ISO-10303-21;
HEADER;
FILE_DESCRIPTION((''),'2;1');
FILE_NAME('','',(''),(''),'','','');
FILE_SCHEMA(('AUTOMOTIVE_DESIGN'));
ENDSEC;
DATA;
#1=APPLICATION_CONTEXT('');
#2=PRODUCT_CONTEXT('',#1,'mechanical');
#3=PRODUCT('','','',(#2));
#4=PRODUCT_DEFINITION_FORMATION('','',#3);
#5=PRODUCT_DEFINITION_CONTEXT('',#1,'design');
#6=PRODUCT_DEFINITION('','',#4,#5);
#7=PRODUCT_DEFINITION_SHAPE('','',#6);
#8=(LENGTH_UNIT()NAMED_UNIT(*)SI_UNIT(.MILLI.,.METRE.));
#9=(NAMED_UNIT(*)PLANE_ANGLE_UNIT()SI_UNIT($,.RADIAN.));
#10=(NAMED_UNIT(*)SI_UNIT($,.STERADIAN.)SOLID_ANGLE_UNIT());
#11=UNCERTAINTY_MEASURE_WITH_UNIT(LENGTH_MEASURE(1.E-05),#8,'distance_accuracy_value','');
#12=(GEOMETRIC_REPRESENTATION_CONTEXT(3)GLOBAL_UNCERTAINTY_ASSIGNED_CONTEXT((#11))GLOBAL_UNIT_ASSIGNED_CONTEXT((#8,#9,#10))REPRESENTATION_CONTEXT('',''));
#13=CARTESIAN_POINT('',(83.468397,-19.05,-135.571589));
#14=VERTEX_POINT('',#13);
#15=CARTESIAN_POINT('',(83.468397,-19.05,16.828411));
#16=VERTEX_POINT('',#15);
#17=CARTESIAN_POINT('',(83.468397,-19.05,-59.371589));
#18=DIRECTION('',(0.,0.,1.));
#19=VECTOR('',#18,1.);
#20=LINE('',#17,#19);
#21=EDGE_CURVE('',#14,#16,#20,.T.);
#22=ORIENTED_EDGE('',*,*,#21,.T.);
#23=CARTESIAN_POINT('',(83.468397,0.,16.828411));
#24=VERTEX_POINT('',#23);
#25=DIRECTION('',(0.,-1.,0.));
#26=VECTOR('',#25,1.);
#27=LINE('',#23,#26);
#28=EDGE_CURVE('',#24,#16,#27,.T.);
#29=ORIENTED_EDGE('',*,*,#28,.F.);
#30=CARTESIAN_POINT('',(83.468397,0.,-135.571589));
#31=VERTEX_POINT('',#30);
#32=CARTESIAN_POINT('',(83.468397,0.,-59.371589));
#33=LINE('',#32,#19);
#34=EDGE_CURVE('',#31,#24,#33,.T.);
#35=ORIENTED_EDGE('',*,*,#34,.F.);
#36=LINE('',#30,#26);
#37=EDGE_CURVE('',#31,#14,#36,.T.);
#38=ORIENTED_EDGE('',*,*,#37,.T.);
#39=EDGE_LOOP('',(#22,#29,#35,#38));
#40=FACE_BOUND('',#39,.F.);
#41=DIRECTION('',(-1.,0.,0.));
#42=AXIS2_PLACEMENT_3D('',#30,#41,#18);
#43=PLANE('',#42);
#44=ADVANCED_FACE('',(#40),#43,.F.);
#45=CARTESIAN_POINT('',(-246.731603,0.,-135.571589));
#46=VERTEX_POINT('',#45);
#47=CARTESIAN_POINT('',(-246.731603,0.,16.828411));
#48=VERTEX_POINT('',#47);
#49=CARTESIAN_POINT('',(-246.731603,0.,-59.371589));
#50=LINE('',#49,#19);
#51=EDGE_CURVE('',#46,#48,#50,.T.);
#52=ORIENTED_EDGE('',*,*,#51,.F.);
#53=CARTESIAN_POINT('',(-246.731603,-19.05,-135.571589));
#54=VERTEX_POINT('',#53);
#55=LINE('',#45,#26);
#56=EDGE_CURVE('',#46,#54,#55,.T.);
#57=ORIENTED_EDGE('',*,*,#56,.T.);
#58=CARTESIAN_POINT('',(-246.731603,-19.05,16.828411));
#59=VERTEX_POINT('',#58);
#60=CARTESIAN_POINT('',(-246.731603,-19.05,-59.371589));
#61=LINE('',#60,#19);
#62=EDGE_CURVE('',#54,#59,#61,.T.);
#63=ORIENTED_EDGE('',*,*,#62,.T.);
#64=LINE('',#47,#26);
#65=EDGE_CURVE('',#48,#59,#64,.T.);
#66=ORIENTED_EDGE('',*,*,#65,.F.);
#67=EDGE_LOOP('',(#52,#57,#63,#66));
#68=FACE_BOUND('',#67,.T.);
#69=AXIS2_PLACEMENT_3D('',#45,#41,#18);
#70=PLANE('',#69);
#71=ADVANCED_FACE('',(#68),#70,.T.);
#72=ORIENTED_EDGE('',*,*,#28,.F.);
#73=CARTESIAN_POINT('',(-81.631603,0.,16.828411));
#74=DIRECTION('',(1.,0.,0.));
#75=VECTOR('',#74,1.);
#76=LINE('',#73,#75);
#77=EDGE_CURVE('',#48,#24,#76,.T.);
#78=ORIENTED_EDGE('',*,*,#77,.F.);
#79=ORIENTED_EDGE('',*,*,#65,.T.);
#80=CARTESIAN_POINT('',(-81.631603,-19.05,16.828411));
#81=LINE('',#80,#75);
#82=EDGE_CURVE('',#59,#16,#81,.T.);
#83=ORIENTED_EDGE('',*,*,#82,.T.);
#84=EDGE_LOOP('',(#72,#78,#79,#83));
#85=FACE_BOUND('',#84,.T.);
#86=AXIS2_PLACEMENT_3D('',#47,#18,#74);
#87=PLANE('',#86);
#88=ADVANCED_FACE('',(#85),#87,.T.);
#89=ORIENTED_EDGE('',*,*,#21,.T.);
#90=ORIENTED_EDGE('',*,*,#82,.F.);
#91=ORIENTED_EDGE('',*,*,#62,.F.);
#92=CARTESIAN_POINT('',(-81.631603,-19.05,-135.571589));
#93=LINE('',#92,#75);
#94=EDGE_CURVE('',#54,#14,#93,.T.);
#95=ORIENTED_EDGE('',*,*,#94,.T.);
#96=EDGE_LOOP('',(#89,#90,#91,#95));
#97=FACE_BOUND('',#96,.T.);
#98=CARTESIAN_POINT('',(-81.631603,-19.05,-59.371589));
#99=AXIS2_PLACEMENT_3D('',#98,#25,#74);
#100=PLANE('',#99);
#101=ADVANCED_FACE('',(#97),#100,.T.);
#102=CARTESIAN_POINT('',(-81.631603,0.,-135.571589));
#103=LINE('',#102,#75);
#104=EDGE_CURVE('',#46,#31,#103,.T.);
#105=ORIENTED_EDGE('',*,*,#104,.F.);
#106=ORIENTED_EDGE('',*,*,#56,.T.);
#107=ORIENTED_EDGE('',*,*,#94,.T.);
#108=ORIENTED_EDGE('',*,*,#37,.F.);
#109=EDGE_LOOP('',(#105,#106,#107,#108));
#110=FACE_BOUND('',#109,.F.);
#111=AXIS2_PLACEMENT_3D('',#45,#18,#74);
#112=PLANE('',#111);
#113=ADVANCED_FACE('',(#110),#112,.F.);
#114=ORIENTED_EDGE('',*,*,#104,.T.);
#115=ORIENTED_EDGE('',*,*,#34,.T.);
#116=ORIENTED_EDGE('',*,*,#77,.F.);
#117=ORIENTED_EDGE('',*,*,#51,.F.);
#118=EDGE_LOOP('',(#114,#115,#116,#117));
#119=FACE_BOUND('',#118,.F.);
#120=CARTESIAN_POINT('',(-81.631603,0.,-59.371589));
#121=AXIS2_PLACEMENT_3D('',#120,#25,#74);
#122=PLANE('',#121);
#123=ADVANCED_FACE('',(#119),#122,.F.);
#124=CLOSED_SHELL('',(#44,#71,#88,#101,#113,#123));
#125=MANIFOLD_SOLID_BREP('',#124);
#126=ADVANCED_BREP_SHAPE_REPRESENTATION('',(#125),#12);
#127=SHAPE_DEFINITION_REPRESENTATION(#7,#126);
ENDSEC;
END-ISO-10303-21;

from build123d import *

# Parameters (mm, degrees)
F0_W     = 381
F0_H     = 152.4
F1_DEPTH = 25.4
F3_W     = 330.2
F3_H     = 152.4
F4_DEPTH = 19.05


# Not quite as in the source:
# - a length typed as a fraction of an inch, garbled in the dataset ("3 / 203.2 mm" for 3/8 in), is restored


with BuildPart() as f1:
    # F0 (on Front) → F1 (new body)
    with BuildSketch(Plane.XZ):
        with Locations((-29.8060849309, -110.5314957584)):
            Rectangle(F0_W, F0_H)
    extrude(amount=F1_DEPTH)


with BuildPart() as f4:
    # F3 (on Front) → F4 (new body)
    with BuildSketch(Plane.XZ):
        with Locations((-81.6316027194, -59.3715892611)):
            Rectangle(F3_W, F3_H)
    extrude(amount=F4_DEPTH)


solid = f4.part
